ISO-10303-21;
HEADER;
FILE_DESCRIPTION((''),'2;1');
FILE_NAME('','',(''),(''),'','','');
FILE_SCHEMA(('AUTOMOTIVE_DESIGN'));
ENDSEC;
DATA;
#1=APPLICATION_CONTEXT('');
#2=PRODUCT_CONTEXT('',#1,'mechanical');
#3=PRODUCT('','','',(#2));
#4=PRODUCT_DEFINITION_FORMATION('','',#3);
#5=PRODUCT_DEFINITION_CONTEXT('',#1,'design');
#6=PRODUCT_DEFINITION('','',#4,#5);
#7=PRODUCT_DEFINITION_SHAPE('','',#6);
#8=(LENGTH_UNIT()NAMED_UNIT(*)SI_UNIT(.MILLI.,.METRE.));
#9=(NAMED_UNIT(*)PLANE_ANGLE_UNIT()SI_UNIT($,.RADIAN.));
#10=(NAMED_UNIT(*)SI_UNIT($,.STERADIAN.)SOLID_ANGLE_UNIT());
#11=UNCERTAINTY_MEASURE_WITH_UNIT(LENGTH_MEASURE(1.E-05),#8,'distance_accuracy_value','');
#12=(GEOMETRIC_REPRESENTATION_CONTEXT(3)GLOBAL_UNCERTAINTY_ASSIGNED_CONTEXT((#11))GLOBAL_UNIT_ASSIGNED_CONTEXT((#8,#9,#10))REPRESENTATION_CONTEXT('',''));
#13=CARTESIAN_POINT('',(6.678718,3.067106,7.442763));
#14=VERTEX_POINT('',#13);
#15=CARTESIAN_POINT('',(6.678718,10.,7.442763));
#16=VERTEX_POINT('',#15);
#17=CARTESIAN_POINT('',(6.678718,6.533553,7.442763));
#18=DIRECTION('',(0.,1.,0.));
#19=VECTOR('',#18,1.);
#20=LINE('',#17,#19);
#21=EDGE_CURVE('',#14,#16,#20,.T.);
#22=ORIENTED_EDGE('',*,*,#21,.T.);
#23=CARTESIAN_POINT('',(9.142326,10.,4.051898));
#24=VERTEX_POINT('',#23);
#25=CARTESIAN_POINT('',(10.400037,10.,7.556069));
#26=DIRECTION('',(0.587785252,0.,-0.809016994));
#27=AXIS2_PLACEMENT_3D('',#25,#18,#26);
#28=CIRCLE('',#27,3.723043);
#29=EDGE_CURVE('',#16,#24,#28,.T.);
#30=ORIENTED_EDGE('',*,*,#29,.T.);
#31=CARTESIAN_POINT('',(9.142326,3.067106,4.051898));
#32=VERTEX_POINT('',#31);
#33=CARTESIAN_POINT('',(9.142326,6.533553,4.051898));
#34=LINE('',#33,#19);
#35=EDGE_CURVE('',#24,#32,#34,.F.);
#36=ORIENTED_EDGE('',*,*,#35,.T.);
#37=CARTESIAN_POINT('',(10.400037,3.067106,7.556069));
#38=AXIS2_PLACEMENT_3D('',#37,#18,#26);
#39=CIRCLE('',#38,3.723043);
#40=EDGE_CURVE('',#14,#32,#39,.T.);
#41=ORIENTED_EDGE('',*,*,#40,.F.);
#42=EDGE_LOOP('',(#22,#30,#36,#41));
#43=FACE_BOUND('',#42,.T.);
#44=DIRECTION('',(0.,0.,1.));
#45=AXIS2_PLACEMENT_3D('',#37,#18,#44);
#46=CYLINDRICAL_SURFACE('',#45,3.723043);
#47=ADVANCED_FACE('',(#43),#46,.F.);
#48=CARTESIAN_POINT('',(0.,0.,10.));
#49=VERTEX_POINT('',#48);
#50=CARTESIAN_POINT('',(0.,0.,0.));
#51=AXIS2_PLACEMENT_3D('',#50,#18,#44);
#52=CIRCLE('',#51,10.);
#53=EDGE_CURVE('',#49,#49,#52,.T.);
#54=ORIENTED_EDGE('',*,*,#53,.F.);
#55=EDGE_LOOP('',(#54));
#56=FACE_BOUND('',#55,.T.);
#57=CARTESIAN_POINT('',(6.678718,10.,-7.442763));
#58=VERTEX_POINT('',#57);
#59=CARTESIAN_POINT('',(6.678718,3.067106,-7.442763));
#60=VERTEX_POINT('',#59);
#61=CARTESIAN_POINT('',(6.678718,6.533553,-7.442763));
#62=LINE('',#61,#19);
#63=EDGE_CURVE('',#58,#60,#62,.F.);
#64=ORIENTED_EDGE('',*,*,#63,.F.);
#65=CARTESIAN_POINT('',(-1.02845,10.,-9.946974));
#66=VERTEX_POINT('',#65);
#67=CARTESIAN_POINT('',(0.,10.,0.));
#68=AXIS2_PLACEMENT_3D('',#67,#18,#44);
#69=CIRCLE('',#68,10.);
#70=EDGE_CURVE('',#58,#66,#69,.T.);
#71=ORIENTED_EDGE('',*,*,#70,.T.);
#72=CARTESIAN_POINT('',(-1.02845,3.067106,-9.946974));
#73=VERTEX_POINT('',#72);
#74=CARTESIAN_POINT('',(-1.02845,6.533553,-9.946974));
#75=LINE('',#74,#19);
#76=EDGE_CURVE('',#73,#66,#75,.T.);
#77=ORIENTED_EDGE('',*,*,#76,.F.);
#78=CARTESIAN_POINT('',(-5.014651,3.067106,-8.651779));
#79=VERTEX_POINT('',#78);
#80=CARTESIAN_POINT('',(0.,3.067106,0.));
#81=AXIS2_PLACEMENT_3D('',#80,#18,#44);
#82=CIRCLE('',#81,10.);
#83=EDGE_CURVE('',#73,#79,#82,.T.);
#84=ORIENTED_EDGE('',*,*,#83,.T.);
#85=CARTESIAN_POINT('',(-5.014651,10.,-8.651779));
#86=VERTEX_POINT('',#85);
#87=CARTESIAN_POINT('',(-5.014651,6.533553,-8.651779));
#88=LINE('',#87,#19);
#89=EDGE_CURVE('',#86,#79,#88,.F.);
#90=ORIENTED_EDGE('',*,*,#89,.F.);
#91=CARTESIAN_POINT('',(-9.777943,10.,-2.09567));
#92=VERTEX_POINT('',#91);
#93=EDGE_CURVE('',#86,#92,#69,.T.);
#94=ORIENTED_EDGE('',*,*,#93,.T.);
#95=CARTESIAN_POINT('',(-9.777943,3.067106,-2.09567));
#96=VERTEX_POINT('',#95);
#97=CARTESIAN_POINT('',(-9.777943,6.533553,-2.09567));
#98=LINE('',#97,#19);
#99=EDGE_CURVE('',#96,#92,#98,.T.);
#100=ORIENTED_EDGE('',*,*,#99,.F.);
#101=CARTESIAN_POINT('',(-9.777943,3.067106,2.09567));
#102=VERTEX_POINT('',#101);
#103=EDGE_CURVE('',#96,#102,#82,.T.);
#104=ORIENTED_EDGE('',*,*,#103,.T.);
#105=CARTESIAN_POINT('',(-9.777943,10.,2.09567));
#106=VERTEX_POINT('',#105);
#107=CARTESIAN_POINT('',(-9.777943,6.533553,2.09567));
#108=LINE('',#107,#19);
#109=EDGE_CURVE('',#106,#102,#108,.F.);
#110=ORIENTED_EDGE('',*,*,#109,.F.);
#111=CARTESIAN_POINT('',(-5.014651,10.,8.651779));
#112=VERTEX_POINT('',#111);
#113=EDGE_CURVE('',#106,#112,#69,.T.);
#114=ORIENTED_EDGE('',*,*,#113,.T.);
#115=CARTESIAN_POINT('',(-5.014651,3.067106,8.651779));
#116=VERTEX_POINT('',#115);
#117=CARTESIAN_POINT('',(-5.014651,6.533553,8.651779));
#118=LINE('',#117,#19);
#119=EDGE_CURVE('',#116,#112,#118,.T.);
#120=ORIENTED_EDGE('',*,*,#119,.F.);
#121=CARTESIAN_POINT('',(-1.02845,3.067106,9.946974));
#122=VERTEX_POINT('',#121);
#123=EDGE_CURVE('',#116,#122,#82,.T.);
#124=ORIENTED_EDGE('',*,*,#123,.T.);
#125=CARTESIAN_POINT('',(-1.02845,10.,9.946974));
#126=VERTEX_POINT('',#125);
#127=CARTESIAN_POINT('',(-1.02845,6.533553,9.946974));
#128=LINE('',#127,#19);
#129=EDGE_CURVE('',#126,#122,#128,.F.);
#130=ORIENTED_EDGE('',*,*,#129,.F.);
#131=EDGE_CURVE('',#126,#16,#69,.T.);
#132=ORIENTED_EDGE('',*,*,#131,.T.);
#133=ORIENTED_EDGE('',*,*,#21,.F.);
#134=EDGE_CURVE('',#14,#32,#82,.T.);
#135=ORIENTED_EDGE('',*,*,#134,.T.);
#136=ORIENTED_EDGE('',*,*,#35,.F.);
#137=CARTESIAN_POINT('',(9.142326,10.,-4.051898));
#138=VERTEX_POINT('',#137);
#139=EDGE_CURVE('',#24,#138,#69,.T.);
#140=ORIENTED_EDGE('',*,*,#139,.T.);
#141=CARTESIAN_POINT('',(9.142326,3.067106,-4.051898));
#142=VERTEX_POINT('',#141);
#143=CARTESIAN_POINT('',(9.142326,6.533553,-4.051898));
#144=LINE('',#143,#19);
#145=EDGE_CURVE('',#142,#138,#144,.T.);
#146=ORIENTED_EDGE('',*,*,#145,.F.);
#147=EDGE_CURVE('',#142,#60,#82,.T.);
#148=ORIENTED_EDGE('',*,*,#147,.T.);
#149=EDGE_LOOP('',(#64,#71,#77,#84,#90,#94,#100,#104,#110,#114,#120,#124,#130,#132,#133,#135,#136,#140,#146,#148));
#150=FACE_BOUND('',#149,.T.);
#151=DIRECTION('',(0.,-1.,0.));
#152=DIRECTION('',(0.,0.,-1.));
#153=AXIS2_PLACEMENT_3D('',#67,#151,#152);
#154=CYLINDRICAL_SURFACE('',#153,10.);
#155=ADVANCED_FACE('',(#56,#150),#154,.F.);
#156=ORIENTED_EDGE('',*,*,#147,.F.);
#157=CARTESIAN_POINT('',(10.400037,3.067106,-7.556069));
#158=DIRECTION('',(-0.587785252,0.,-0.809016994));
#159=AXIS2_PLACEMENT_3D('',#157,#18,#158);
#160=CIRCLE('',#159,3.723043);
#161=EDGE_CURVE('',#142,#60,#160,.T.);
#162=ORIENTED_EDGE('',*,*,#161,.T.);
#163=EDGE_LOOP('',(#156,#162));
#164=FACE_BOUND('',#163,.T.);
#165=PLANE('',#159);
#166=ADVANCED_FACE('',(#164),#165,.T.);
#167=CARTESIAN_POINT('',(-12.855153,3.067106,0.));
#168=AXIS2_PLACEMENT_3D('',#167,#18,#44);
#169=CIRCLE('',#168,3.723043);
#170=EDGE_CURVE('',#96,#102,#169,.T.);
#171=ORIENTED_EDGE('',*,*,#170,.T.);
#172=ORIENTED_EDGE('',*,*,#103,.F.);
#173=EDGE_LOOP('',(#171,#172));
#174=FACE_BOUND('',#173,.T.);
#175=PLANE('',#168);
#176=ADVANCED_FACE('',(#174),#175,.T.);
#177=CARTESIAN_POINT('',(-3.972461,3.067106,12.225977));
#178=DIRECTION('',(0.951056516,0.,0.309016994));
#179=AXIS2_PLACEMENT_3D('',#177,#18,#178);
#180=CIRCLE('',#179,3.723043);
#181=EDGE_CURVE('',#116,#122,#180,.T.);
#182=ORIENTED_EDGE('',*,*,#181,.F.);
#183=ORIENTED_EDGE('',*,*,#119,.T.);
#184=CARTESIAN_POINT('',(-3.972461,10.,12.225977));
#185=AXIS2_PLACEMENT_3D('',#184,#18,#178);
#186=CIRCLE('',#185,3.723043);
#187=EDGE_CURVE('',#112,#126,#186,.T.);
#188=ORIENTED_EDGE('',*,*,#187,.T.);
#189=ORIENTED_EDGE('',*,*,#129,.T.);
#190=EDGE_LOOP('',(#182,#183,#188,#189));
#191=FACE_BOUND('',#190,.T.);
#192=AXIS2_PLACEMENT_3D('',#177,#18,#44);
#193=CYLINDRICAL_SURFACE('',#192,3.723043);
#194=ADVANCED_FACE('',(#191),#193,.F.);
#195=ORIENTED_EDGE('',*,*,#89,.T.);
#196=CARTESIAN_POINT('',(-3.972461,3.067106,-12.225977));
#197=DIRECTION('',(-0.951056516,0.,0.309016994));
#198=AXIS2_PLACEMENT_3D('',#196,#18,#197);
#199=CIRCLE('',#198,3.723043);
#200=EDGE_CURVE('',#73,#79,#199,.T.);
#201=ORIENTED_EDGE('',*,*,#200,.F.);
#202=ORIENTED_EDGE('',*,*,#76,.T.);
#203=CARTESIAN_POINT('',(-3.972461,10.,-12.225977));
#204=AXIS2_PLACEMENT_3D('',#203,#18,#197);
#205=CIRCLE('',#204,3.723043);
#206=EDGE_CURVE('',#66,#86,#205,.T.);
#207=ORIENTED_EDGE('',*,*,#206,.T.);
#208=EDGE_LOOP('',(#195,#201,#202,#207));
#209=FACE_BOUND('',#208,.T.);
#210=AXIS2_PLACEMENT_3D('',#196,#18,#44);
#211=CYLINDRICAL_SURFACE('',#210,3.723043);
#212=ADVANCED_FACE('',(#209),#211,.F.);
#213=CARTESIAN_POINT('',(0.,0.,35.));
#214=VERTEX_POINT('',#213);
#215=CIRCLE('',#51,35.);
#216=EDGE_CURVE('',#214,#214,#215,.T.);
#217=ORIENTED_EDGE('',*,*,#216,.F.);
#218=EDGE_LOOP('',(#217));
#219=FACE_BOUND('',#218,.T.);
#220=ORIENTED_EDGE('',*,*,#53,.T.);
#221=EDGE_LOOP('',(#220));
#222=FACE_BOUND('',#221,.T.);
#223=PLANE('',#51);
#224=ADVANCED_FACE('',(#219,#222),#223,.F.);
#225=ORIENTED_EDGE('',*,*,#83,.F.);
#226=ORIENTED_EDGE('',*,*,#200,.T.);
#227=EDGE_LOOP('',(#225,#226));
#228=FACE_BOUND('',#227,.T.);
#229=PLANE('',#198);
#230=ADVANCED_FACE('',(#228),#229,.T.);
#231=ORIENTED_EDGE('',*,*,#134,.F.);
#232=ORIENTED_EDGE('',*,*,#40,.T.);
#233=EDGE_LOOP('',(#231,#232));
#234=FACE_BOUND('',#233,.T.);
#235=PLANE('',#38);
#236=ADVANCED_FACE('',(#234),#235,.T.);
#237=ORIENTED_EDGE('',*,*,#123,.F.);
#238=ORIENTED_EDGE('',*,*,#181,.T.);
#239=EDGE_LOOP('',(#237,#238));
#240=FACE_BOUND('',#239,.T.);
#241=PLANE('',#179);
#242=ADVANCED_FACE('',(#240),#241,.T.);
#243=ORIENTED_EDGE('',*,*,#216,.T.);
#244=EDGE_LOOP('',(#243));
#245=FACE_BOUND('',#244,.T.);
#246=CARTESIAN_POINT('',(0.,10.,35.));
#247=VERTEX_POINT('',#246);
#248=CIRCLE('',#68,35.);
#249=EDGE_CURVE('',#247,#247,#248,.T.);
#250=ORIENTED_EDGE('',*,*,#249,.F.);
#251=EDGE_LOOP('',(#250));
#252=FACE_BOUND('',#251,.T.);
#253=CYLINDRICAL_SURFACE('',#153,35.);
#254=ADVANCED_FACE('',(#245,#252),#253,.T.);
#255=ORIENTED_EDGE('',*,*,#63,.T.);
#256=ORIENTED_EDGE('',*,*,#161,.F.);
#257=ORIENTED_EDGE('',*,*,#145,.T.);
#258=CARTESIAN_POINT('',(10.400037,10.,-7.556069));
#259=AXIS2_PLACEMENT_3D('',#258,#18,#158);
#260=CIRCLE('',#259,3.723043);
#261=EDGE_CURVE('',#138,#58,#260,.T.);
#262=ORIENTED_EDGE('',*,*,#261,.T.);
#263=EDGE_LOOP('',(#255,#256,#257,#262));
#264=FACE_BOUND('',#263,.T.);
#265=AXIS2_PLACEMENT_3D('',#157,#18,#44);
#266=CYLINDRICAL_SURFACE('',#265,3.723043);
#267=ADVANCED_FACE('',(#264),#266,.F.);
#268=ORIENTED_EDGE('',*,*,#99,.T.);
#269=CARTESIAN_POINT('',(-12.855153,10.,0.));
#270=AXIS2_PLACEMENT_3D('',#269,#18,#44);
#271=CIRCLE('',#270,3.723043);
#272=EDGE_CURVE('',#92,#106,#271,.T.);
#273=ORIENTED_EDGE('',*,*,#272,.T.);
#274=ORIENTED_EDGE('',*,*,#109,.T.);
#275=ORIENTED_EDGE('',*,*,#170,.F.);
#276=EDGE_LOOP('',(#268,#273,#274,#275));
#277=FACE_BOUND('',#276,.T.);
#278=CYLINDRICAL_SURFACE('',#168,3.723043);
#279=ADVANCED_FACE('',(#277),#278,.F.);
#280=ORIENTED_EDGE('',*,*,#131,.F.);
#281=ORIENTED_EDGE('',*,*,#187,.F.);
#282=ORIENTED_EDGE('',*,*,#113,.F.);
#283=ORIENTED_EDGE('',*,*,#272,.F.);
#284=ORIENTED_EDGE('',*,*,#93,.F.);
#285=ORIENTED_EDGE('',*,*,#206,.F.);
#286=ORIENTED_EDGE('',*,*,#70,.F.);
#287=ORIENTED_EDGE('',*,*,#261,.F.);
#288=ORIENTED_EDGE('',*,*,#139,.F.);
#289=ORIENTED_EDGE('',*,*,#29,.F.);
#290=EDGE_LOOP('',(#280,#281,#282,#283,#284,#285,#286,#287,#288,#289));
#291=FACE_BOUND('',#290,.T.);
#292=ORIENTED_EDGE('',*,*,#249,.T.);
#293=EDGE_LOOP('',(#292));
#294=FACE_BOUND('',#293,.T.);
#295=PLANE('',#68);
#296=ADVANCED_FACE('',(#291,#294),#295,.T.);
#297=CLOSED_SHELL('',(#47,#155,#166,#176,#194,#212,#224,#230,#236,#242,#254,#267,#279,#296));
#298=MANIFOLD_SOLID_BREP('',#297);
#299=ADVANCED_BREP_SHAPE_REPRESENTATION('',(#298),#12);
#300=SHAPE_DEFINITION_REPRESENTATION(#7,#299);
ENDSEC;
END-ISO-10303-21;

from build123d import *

# Parameters (mm, degrees)
SKETCH1_R           = 35
BOSS_EXTRUDE1_DEPTH = 10
SKETCH2_R           = 10
CUT_EXTRUDE1_DEPTH  = 51.497524692
SKETCH3_R           = 3.723043441
CUT_EXTRUDE2_DEPTH  = 6.932893731
CIRPATTERN1_COUNT   = 5


with BuildPart() as part:
    # Sketch1 → Boss-Extrude1 (new body)
    with BuildSketch(Plane(origin=(0, 0, 0), x_dir=(1, 0, 0), z_dir=(0, 1, 0))):
        Circle(SKETCH1_R)
    extrude(amount=BOSS_EXTRUDE1_DEPTH)

    # Sketch2 → Cut-Extrude1 (cut, through all)
    with BuildSketch(Plane(origin=(0, 0, 0), x_dir=(1, 0, 0), z_dir=(0, 1, 0))):
        Circle(SKETCH2_R)
    extrude(amount=CUT_EXTRUDE1_DEPTH, mode=Mode.SUBTRACT)

    # Sketch3 → Cut-Extrude2 (cut)
    with BuildSketch(Plane(origin=(0, 10, 0), x_dir=(1, 0, 0), z_dir=(0, 1, 0))):
        with Locations((-12.855153021, 0)):
            Circle(SKETCH3_R)
    cut_extrude2 = extrude(amount=-CUT_EXTRUDE2_DEPTH, mode=Mode.SUBTRACT)

    # CirPattern1: Cut-Extrude2 ×5 about axis
    cirpattern1_axis = Axis((0, 0, 0), (0, 1, 0))
    for i in range(1, CIRPATTERN1_COUNT):
        add(cut_extrude2.rotate(cirpattern1_axis, i * 360 / CIRPATTERN1_COUNT), mode=Mode.SUBTRACT)


solid = part.part
